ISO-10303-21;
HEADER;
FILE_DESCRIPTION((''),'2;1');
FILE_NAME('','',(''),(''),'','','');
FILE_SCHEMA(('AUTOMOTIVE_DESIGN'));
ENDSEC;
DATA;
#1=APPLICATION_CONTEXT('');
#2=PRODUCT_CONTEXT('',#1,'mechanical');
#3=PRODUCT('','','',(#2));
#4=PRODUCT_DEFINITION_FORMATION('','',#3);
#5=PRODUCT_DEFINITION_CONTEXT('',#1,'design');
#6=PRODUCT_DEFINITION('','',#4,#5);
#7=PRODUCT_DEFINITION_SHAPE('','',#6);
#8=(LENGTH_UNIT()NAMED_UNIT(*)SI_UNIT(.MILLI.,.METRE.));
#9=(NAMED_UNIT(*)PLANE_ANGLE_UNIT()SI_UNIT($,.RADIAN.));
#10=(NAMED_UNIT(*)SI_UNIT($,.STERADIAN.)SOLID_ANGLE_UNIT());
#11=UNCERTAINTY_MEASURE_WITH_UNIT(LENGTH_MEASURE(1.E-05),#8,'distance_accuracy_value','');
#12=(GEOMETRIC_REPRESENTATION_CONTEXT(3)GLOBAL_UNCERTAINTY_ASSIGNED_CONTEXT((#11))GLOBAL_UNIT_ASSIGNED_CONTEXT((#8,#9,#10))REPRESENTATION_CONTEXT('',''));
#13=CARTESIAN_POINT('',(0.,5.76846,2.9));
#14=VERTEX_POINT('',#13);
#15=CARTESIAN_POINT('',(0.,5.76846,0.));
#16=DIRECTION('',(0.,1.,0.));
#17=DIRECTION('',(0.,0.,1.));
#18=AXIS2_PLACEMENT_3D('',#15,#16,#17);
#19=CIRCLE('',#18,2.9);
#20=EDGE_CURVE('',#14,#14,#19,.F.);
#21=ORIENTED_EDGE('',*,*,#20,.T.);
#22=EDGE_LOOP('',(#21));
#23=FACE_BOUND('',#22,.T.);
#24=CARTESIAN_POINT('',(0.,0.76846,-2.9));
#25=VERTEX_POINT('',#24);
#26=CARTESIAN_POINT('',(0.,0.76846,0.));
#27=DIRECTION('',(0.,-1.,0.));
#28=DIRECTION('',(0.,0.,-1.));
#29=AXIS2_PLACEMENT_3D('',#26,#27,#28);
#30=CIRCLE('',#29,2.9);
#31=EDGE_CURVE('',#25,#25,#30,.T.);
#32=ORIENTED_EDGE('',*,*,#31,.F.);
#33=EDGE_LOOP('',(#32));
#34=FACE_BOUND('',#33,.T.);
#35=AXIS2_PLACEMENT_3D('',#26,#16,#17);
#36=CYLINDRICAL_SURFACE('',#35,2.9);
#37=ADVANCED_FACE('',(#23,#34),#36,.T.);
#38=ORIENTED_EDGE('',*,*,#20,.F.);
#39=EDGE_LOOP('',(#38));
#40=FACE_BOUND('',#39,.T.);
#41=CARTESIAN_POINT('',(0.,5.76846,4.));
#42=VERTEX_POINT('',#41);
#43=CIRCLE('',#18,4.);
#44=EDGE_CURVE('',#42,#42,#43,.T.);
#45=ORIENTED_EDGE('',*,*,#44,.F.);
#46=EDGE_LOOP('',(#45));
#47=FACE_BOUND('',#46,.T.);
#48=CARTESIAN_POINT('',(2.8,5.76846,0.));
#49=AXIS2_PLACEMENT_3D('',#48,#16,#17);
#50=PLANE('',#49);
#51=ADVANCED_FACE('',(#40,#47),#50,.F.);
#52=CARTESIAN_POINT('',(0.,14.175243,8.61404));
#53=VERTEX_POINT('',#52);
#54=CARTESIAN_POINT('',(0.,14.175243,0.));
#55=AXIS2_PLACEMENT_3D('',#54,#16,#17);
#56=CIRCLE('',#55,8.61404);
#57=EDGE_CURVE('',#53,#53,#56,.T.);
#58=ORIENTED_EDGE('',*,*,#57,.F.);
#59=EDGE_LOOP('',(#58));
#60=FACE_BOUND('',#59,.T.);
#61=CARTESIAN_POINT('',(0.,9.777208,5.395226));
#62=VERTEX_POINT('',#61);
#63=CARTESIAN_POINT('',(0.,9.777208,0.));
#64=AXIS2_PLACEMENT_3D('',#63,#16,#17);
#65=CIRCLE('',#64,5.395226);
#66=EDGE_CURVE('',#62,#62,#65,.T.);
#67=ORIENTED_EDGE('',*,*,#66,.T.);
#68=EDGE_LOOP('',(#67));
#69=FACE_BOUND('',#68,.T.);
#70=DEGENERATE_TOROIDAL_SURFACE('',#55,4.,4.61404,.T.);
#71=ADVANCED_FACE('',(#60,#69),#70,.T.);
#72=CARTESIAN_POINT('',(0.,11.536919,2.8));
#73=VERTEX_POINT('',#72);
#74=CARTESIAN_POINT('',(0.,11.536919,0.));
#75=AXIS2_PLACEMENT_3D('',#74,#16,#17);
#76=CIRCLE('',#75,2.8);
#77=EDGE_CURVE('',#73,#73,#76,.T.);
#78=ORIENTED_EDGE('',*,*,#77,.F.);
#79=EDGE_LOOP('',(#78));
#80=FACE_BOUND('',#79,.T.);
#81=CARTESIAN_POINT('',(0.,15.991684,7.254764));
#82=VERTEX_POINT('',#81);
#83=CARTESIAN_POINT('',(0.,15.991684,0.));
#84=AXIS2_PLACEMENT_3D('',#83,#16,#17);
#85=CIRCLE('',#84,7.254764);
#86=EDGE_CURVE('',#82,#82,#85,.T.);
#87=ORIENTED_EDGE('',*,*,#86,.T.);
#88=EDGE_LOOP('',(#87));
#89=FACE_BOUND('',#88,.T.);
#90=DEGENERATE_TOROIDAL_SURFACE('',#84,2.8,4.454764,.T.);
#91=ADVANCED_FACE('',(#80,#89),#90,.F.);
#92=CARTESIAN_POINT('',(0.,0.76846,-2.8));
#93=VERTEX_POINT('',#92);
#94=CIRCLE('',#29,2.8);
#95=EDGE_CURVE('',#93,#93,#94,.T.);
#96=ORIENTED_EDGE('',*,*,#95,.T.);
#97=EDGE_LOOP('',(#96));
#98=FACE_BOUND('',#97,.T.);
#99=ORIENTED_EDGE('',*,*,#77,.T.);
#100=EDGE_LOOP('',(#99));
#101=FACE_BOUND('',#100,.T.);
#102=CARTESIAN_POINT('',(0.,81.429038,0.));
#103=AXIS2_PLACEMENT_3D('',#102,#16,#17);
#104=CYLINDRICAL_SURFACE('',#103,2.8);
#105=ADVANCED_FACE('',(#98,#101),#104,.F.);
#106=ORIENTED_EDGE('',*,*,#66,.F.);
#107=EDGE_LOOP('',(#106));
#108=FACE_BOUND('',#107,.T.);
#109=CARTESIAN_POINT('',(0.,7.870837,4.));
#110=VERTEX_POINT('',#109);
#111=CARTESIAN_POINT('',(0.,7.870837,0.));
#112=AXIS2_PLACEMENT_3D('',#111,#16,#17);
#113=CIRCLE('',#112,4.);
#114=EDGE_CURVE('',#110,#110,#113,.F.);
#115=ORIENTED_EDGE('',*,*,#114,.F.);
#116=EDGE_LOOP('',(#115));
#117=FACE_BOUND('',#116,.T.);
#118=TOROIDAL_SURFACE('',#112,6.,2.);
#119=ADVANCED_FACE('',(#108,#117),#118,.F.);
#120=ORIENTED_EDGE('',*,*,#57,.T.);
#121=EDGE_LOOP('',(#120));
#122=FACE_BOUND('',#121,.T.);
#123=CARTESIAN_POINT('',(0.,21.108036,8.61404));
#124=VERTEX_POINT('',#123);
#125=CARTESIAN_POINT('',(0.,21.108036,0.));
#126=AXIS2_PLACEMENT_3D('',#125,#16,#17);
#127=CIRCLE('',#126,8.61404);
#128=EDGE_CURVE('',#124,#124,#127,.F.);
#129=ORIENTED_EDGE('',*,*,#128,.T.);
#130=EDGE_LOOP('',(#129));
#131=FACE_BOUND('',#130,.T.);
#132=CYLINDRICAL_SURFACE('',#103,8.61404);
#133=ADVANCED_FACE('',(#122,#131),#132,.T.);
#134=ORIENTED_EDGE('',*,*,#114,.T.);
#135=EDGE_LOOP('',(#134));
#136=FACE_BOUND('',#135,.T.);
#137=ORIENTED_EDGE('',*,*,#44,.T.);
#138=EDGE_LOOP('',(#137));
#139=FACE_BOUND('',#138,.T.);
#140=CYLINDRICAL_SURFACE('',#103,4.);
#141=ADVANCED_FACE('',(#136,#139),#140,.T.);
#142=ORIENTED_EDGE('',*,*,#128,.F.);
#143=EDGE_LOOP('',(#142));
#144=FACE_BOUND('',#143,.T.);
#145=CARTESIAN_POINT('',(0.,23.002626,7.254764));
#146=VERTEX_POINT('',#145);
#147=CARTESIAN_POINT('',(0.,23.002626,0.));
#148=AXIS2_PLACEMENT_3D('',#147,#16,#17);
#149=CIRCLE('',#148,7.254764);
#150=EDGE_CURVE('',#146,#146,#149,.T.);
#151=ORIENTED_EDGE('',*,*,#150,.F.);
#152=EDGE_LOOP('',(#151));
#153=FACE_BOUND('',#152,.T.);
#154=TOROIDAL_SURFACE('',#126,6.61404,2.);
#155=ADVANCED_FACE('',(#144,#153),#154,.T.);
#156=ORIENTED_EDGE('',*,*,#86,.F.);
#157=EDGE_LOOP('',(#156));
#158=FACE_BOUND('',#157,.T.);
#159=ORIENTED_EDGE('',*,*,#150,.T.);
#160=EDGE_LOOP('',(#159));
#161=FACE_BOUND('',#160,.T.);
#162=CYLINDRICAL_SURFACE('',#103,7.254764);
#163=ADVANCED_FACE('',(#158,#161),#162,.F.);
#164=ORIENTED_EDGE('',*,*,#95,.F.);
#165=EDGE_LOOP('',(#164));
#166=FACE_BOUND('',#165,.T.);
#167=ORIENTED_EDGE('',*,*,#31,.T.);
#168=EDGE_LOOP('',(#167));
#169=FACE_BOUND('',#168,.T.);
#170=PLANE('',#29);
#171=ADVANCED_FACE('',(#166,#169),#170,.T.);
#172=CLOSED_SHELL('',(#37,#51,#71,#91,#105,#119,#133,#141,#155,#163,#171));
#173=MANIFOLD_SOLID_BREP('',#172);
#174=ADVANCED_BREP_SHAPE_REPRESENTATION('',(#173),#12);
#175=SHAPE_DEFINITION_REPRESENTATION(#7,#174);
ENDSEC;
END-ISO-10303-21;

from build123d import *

# Parameters (mm, degrees)
FILLET2_R           = 2
FILLET5_R           = 2
SKETCH4_R           = 2.9
SKETCH4_R_2         = 2.8
BOSS_EXTRUDE1_DEPTH = 5


with BuildPart() as part:
    # Sketch1 → Revolve1 (revolve)
    with BuildSketch(Plane.XY, mode=Mode.PRIVATE) as revolve1_sk:
        with BuildLine():
            Line((2.8, 5.768459657), (2.8, 11.536919315))
            ThreePointArc((2.8, 11.536919315), (5.949994158, 12.841689616), (7.254764459, 15.991683774))
            Line((7.254764459, 15.991683774), (7.254764459, 23.002625948))
            Line((7.254764459, 23.002625948), (8.614040085, 23.002625948))
            Line((8.614040085, 23.002625948), (8.614040085, 14.175242604))
            ThreePointArc((8.614040085, 14.175242604), (7.262619033, 10.912623572), (4, 9.56120252))
            Line((4, 9.56120252), (4, 5.768459657))
            Line((4, 5.768459657), (2.8, 5.768459657))
        make_face()
    revolve(revolve1_sk.sketch.rotate(Axis((0, 81.429038173, 0), (0, -1, 0)), 90), axis=Axis((0, 81.429038173, 0), (0, -1, 0)))

    # Fillet2
    # the kernel refuses this fillet: 2 mm, written as the material it takes off along each edge
    with BuildSketch(Plane(origin=(0, 23.002625948, 0), x_dir=(0, 0, 1), z_dir=(1, 0, 0))) as fillet2_piece_1:
        with BuildLine():
            CenterArc((6.614040085, 1.894590266), FILLET2_R, 288.684829844, 71.315170156)
            Line((8.614040085, 1.894590266), (8.654040085, 1.894590266))
            Line((8.654040085, 1.894590266), (8.654040085, 0))
            Line((8.654040085, 0), (8.614040085, -0.04))
            ThreePointArc((8.614040085, -0.04), (7.934402272, -0.04), (7.267578947, -0.037891805))
            Line((7.267578947, -0.037891805), (7.254764459, 0))
        make_face()
    revolve(axis=Axis((0, 23.002625948, 0), (0, -1, 0)), mode=Mode.SUBTRACT)

    # Fillet5
    fillet5_edges = [part.edges().sort_by_distance(p)[0] for p in [
        (0, 9.56120252, -4),
    ]]
    fillet(fillet5_edges, radius=FILLET5_R)

    # Sketch4 → Boss-Extrude1 (add)
    with BuildSketch(Plane.XZ.offset(-5.768459657)):
        with Locations(Location((0, 0, 0), (0, 0, 90))):
            Circle(SKETCH4_R)
        with Locations(Location((0, 0, 0), (0, 0, 90))):
            Circle(SKETCH4_R_2, mode=Mode.SUBTRACT)
    extrude(amount=BOSS_EXTRUDE1_DEPTH)


solid = part.part
